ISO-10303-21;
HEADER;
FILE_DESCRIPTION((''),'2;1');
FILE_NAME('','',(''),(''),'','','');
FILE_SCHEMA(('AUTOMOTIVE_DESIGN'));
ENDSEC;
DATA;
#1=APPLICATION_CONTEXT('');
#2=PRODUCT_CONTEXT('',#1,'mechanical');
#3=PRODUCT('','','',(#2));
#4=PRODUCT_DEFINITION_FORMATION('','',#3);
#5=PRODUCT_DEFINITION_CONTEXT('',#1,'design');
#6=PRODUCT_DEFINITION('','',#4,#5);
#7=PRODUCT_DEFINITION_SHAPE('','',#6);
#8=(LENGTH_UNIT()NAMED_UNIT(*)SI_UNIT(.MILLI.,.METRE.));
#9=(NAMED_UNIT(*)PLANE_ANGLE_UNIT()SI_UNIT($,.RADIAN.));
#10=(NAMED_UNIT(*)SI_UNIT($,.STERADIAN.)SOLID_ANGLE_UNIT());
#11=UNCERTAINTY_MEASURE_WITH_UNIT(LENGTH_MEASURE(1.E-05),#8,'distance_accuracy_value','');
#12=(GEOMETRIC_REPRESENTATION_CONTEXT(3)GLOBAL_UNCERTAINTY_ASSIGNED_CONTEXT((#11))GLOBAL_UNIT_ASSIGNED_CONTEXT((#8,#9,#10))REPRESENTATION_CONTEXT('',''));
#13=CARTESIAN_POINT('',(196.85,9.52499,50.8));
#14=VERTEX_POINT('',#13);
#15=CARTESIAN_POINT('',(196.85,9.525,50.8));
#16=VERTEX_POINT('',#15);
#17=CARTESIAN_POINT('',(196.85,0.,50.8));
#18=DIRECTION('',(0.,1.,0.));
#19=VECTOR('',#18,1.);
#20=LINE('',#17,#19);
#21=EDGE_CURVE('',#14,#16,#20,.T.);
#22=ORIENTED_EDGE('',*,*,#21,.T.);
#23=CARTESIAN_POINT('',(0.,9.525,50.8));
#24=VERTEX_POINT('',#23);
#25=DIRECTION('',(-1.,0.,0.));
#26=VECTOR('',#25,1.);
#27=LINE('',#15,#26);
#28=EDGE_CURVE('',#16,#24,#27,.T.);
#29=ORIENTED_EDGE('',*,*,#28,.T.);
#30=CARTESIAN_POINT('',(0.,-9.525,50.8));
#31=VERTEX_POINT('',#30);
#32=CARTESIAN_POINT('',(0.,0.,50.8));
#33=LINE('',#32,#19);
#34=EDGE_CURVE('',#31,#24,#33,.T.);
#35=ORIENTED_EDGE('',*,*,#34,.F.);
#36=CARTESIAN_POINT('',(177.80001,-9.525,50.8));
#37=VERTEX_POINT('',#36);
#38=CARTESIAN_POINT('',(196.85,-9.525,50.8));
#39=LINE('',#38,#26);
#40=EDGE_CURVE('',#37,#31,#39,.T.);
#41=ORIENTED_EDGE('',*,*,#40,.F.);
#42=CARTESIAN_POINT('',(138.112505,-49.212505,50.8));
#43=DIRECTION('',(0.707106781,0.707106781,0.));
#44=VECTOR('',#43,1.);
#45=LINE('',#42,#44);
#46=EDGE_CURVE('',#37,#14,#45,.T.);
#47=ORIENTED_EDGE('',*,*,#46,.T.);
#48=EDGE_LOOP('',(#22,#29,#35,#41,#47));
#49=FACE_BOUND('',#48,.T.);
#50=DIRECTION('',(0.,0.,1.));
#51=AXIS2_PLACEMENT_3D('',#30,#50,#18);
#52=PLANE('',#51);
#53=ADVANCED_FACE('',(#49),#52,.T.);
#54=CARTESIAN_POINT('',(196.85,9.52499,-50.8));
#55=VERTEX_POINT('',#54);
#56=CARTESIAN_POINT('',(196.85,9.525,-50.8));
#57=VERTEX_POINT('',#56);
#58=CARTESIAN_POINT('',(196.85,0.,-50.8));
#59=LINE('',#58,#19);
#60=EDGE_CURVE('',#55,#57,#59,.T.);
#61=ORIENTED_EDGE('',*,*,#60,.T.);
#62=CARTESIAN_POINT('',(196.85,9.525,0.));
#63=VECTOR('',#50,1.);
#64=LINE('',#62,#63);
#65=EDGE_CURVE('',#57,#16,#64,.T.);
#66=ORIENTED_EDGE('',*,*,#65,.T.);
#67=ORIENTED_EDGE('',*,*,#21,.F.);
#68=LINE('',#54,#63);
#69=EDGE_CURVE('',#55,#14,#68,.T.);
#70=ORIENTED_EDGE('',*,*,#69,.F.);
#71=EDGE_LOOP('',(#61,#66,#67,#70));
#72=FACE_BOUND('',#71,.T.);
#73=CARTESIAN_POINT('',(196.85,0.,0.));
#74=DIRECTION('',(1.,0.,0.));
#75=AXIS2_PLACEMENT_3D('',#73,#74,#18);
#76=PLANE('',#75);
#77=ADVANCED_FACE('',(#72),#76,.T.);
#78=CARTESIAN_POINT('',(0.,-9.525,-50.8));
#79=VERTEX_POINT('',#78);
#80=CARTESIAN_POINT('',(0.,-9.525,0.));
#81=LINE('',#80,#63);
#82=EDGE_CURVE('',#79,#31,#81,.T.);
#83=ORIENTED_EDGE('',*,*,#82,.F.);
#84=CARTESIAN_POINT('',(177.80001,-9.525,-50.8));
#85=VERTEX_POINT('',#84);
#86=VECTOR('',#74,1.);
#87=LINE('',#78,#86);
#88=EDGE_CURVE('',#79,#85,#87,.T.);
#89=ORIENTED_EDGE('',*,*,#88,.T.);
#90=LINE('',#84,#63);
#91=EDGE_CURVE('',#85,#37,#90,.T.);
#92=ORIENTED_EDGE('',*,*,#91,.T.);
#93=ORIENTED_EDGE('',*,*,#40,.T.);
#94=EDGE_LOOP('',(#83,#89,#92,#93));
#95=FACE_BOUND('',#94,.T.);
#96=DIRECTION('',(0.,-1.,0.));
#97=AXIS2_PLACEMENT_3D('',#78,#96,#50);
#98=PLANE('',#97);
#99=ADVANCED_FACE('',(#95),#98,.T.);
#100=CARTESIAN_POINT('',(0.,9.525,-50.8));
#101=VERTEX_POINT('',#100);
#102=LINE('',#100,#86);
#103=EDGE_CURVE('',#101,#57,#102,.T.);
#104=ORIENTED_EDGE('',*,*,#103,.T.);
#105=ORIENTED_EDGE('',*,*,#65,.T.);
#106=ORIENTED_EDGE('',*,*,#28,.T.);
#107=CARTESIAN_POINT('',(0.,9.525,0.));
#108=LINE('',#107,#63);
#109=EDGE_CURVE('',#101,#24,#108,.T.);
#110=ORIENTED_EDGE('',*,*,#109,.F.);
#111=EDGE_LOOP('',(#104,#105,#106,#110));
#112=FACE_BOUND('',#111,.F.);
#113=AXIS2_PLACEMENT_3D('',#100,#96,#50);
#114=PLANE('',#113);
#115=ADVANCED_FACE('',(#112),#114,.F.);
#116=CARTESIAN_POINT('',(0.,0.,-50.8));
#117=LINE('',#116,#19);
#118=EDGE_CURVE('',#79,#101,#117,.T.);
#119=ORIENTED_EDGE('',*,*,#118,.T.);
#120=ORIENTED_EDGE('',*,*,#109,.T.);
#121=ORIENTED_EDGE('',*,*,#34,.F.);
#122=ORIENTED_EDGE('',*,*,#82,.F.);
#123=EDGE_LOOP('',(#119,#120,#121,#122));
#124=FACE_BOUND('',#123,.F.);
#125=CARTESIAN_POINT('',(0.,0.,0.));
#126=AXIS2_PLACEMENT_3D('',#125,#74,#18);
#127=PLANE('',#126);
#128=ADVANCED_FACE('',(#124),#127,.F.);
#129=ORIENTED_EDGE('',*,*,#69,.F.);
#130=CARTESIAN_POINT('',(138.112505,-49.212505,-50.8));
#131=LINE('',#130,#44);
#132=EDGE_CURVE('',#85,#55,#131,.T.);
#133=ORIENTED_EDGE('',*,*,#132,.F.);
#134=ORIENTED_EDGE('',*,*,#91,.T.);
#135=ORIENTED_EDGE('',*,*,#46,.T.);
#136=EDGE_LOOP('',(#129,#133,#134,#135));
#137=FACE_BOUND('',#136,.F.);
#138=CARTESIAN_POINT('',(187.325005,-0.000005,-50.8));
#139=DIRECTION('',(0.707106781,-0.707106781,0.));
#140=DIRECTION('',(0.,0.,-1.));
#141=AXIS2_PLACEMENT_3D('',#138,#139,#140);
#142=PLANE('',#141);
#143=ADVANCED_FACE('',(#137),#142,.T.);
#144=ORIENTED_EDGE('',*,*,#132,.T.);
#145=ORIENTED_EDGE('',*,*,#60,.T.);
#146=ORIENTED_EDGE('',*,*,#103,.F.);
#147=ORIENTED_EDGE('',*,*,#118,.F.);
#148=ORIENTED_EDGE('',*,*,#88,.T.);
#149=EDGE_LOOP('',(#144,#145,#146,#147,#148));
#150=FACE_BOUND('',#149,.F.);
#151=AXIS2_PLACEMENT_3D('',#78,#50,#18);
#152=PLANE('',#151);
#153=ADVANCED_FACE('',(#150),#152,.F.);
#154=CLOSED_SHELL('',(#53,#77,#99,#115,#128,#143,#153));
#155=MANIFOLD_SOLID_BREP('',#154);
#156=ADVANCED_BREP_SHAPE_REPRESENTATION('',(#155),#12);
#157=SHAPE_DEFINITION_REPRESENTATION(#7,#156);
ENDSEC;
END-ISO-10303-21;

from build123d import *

# Parameters (mm, degrees)
F0_W     = 19.05
F0_H     = 101.6
F1_DEPTH = 19.05
F2_DEPTH = 196.85
F3_SIZE  = 19.04999


# Not quite as in the source:
# - a fillet or chamfer is up to 0.001 mm smaller than in the source, because OpenCascade refuses the exact size


with BuildPart() as f1:
    # F0 (on Right) → F1 (new body)
    with BuildSketch(Plane.YZ):
        Rectangle(F0_W, F0_H)
    extrude(amount=F1_DEPTH)

    # F0 (on Right) → F2 (join)
    with BuildSketch(Plane.YZ):
        Rectangle(F0_W, F0_H)
    extrude(amount=F2_DEPTH)

    # F3 (size 19.05 in the source; OpenCascade refuses exactly that, so slightly less here)
    f3_edges = [f1.edges().sort_by_distance(p)[0] for p in [
        (196.85, -9.525, 0),
    ]]
    chamfer(f3_edges, length=F3_SIZE)


solid = f1.part
